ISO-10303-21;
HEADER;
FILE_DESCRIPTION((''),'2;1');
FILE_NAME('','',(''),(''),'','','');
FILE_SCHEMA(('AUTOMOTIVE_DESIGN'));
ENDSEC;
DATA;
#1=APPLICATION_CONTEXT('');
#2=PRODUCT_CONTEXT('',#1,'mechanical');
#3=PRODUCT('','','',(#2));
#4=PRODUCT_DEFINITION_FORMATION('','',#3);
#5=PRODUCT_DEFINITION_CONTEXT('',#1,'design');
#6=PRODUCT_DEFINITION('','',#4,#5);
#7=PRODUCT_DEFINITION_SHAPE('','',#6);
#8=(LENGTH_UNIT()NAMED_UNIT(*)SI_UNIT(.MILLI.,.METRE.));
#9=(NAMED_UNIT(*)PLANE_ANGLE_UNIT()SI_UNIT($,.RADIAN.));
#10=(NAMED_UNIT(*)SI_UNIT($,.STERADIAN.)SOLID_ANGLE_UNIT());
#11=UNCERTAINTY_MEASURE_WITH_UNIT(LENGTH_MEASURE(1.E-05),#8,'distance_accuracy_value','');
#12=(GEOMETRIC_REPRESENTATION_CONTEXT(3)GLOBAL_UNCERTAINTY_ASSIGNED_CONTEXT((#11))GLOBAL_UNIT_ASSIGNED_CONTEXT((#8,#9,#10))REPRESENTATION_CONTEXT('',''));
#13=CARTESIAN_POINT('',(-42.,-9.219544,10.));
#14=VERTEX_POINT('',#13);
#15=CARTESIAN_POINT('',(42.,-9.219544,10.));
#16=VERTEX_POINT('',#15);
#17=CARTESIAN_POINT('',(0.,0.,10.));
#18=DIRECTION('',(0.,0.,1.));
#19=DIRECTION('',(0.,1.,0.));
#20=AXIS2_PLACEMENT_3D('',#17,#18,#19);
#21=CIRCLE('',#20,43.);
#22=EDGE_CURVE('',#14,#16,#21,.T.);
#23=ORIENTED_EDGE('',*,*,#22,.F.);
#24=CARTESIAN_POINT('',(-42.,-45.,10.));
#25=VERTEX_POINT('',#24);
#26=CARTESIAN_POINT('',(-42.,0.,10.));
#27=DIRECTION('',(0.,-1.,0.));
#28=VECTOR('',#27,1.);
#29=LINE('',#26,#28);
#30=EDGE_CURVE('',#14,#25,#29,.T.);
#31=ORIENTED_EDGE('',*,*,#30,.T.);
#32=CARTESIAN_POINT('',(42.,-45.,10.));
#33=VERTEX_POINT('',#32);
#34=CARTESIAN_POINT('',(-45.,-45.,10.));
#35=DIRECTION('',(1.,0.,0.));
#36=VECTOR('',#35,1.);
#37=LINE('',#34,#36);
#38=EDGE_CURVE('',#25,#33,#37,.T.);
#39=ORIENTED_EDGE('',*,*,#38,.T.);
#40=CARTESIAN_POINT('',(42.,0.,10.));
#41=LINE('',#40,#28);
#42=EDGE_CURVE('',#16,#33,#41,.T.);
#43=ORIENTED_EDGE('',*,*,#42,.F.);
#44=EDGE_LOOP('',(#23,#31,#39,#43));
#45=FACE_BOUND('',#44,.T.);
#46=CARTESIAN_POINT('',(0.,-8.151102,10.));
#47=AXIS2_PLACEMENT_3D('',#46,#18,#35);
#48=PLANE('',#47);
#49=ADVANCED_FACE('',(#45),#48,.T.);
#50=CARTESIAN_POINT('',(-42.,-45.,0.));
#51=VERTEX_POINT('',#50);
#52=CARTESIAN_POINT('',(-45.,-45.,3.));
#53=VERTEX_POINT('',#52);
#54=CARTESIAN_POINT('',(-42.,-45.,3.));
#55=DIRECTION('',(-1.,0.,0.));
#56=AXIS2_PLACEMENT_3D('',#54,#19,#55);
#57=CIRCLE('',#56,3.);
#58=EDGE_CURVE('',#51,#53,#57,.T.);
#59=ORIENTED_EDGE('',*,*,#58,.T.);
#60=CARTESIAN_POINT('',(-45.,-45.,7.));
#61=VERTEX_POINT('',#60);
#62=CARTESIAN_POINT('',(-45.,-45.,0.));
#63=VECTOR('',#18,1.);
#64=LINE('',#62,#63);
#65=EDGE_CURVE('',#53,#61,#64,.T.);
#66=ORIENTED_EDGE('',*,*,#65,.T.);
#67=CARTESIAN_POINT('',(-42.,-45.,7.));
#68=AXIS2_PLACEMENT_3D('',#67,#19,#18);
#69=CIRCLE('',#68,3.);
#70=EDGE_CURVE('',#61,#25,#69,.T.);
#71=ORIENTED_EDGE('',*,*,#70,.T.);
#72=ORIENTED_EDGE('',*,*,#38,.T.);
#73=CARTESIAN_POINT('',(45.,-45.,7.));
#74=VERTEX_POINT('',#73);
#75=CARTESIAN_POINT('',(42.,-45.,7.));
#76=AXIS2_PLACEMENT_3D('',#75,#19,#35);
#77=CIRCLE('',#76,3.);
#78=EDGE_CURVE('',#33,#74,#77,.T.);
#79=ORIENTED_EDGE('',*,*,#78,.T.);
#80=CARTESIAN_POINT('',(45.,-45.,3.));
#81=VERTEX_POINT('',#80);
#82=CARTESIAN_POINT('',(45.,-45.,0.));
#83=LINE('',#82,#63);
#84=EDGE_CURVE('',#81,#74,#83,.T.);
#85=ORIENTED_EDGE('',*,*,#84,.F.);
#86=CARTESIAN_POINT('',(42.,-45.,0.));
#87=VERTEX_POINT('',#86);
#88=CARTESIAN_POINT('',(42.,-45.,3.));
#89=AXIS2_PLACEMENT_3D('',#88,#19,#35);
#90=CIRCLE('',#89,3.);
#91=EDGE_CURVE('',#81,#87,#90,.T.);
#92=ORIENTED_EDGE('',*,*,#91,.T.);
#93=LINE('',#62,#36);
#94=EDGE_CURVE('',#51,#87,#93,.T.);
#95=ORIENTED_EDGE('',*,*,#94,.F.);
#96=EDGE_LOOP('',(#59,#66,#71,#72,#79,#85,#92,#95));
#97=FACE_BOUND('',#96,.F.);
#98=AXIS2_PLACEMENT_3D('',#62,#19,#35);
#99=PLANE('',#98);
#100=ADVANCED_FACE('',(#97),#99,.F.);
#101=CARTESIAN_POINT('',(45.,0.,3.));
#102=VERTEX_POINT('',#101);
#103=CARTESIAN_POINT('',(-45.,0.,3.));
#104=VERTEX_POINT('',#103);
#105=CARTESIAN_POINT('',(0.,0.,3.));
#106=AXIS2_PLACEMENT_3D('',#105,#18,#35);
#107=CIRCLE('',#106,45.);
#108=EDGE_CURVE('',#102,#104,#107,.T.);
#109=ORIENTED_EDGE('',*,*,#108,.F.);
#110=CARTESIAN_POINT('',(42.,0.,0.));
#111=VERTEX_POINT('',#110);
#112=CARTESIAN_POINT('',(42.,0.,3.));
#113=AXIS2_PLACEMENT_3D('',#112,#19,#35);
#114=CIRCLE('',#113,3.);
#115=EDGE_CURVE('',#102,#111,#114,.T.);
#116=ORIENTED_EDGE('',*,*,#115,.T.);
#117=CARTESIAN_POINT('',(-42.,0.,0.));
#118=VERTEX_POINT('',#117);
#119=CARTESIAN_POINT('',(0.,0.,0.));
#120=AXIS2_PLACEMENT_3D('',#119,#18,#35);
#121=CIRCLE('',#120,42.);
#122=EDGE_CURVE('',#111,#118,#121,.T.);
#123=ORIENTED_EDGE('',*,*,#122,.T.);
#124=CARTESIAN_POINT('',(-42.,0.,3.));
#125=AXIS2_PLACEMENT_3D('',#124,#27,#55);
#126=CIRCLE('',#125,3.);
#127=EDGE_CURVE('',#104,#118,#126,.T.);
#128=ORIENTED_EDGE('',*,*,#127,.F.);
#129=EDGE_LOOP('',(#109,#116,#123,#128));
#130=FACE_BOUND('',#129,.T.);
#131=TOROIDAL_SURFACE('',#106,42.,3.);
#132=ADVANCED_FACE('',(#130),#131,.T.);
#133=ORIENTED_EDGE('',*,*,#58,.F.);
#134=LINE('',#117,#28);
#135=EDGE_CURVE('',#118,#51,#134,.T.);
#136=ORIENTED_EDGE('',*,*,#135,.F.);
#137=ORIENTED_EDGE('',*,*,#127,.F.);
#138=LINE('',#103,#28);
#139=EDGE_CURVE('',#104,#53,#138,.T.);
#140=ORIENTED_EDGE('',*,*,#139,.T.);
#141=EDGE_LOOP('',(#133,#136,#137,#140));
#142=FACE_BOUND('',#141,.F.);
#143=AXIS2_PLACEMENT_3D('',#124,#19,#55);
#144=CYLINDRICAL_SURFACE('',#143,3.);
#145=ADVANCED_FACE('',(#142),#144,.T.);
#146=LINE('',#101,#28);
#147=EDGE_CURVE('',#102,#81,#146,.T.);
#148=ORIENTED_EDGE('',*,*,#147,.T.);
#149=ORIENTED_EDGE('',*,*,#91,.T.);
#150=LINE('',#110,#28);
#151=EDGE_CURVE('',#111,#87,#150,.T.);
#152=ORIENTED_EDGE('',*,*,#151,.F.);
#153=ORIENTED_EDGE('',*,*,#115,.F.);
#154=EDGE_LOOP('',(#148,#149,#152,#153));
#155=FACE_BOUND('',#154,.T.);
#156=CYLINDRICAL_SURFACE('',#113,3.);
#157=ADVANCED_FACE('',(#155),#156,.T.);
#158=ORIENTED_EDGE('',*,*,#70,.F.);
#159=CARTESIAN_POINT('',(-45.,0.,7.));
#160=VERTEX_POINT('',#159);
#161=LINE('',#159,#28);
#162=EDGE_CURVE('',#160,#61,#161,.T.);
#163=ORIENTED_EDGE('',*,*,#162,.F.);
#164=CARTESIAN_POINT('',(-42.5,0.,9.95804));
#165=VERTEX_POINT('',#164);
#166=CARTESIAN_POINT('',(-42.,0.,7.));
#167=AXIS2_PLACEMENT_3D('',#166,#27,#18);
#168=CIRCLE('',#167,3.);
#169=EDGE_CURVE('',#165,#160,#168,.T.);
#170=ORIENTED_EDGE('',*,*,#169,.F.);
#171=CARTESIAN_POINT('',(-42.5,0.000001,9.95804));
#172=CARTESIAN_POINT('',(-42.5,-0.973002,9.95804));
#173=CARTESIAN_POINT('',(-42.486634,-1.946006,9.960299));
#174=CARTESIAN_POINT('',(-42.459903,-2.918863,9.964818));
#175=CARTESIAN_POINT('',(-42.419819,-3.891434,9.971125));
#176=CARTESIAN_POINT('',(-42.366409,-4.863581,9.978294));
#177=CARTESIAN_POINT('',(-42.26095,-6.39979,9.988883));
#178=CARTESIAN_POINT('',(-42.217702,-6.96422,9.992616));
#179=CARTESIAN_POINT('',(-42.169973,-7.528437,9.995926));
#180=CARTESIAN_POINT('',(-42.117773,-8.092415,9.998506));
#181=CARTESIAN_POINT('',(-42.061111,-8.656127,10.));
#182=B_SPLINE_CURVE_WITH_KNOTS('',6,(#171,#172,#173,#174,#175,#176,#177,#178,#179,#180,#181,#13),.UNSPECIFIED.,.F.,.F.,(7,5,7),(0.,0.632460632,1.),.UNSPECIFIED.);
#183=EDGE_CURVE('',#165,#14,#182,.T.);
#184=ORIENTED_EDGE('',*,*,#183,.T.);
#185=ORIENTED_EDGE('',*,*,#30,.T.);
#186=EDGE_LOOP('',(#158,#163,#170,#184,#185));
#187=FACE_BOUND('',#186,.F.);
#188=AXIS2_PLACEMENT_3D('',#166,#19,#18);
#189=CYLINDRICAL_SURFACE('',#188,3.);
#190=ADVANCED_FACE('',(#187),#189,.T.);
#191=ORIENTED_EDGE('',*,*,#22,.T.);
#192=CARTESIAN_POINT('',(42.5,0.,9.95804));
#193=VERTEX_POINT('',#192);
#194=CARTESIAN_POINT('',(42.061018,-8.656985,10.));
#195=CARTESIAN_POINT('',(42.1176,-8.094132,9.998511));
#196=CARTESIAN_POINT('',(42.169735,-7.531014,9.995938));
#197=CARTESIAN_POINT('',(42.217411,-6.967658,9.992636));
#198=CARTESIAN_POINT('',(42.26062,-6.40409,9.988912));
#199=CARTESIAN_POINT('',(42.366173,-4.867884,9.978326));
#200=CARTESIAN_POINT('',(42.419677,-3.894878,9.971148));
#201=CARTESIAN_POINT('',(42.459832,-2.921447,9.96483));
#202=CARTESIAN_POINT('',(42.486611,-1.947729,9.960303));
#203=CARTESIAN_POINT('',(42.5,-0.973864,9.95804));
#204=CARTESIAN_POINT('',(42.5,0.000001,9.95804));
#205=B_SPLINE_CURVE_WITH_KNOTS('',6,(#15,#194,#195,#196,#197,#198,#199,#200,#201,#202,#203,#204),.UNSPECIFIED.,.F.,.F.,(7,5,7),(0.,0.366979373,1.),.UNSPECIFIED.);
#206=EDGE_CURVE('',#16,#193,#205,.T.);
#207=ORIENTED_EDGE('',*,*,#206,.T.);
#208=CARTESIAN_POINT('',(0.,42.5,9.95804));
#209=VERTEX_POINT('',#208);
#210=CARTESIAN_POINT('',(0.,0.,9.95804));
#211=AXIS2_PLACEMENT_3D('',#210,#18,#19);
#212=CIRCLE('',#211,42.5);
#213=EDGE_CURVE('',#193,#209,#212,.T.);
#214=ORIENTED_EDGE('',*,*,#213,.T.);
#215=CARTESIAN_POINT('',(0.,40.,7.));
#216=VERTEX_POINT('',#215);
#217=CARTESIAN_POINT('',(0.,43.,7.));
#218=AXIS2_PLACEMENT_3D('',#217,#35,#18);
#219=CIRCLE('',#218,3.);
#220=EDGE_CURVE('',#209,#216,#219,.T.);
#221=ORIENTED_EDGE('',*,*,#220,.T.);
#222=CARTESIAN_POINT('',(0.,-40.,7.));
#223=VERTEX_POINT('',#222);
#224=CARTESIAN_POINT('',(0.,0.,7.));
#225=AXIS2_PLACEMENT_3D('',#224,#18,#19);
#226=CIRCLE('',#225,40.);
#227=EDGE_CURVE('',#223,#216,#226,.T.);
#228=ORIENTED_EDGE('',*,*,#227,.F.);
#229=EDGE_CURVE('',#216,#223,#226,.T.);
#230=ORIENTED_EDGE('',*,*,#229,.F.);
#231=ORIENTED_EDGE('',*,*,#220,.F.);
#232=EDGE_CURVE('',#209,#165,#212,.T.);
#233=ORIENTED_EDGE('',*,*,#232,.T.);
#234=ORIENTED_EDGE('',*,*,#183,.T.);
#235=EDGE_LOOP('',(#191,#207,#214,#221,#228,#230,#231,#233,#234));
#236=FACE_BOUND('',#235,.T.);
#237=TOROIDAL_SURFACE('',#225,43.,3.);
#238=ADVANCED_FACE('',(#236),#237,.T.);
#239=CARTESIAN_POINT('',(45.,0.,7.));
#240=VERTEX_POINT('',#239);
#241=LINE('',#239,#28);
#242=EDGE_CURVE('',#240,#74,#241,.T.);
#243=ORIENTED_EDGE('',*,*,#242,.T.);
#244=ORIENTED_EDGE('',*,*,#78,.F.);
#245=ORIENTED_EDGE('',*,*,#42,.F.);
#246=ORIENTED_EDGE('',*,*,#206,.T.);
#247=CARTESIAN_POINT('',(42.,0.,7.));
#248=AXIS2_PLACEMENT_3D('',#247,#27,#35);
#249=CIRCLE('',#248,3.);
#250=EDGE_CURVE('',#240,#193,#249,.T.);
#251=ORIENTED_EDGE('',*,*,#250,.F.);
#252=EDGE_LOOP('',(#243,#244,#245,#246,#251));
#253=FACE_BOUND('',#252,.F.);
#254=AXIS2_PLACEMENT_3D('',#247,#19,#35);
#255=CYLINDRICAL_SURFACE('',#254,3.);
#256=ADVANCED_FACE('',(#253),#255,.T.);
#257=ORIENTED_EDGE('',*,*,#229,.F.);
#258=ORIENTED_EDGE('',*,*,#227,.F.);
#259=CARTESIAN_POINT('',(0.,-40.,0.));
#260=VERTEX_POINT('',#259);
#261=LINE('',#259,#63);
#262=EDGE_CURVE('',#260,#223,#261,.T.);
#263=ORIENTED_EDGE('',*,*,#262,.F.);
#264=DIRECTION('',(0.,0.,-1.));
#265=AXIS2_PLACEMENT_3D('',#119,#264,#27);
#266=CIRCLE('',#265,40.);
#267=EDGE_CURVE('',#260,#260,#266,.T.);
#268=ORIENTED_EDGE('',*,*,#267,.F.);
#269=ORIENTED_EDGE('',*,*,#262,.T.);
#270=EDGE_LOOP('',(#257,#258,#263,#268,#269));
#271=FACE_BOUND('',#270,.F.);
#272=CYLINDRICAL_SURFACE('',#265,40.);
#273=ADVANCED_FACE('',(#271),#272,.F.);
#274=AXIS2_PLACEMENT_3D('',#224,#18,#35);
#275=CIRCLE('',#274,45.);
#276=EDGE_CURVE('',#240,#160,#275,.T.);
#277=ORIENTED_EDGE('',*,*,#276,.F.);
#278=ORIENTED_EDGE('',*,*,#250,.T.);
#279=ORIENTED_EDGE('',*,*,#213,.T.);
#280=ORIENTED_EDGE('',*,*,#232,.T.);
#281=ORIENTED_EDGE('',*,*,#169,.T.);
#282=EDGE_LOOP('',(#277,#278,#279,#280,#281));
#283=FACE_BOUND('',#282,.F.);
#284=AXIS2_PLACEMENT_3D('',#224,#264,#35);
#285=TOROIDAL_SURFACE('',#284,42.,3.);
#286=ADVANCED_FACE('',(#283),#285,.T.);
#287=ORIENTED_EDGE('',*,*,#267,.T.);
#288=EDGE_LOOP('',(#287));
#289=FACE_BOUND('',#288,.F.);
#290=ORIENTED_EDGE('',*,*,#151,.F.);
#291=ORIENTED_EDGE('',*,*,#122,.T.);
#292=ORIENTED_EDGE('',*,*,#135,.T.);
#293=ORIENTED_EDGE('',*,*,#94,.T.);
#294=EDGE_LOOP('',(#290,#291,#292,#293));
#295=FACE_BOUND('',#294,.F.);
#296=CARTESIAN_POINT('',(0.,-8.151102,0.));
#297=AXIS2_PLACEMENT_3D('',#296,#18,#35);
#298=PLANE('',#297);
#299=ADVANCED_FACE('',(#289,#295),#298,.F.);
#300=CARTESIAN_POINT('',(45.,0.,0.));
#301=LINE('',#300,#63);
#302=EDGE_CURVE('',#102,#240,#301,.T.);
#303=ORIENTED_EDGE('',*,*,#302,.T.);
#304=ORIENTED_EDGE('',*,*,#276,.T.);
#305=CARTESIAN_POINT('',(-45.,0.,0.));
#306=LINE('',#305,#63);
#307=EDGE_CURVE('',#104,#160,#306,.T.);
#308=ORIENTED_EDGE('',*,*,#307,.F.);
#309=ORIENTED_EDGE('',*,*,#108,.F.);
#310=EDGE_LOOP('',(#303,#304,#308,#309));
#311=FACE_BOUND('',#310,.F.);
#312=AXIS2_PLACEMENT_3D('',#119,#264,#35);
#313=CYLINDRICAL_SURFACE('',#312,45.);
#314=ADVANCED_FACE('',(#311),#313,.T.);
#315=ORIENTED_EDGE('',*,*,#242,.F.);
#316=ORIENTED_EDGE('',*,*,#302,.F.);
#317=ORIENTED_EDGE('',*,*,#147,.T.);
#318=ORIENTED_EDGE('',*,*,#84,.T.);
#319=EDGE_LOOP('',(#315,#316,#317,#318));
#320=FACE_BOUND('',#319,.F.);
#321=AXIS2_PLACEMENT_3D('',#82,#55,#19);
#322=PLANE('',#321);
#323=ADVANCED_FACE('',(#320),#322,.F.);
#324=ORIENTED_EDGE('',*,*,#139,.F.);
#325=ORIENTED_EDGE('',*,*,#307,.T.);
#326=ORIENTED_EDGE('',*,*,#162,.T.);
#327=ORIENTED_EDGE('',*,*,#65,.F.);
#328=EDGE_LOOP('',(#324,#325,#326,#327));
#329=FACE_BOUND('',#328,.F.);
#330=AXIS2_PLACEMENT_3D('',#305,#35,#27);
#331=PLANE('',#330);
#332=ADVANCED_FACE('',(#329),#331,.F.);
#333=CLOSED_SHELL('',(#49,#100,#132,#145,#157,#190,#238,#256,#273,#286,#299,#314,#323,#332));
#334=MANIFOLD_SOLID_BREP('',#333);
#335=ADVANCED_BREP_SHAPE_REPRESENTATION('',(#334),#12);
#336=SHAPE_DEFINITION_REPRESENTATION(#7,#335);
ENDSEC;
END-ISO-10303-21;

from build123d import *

# Parameters (mm, degrees)
F1_DEPTH    = 10
F2_T1_DEPTH = 52.5
F2_T6_ANGLE = 180
F2_T8_ANGLE = 180


# Not quite as in the source:
# - a fillet or chamfer that OpenCascade refuses, or shapes differently, is made with other operations: its cross-section is extruded or revolved along the edge and cut away or added


with BuildPart() as f1:
    # F0 (on Top) → F1 (new body)
    with BuildSketch(Plane.XY):
        with BuildLine():
            Line((45, -45), (45, 0))
            ThreePointArc((45, 0), (0, 45), (-45, 0))
            Line((-45, 0), (-45, -45))
            Line((-45, -45), (0, -45))
            Line((0, -45), (45, -45))
        make_face()
        with BuildLine():
            ThreePointArc((0, 40), (40, 0), (0, -40))
            ThreePointArc((0, -40), (-40, 0), (0, 40))
        make_face(mode=Mode.SUBTRACT)
    extrude(amount=F1_DEPTH)

    # F2: fillet of radius 3 on 6 edges, made by hand

    # F2_s2 → F2_t1 (cut)
    with BuildSketch(Plane.XZ):
        with BuildLine():
            ThreePointArc((-42, 10), (-44.1213203436, 9.1213203436), (-45, 7))
            Line((-45, 7), (-45, 10))
            Line((-45, 10), (-42, 10))
        make_face()
        with BuildLine():
            ThreePointArc((-45, 3), (-44.1213203436, 0.8786796564), (-42, 0))
            Line((-42, 0), (-45, 0))
            Line((-45, 0), (-45, 3))
        make_face()
        with BuildLine():
            ThreePointArc((45, 3), (44.1213203436, 0.8786796564), (42, 0))
            Line((42, 0), (45, 0))
            Line((45, 0), (45, 3))
        make_face()
        with BuildLine():
            ThreePointArc((45, 7), (44.1213203436, 9.1213203436), (42, 10))
            Line((42, 10), (45, 10))
            Line((45, 10), (45, 7))
        make_face()
    extrude(amount=F2_T1_DEPTH, mode=Mode.SUBTRACT)

    # F2_s3 → F2_t4 (revolve, cut)
    with BuildSketch(Plane.YZ):
        with BuildLine():
            ThreePointArc((43, 10), (40.8786796564, 9.1213203436), (40, 7))
            Line((40, 7), (40, 10))
            Line((40, 10), (43, 10))
        make_face()
    revolve(axis=Axis((0, 0, 10), (0, 0, 1)), mode=Mode.SUBTRACT)

    # F2_s5 → F2_t6 (revolve, cut)
    with BuildSketch(Plane.XZ):
        with BuildLine():
            ThreePointArc((42, 10), (44.1213203436, 9.1213203436), (45, 7))
            Line((45, 7), (45, 10))
            Line((45, 10), (42, 10))
        make_face()
    revolve(axis=Axis((0, 0, 10), (0, 0, 1)), revolution_arc=F2_T6_ANGLE, mode=Mode.SUBTRACT)

    # F2_s7 → F2_t8 (revolve, cut)
    with BuildSketch(Plane.XZ):
        with BuildLine():
            ThreePointArc((42, 0), (44.1213203436, 0.8786796564), (45, 3))
            Line((45, 3), (45, 0))
            Line((45, 0), (42, 0))
        make_face()
    revolve(axis=Axis((0, 0, 0), (0, 0, 1)), revolution_arc=F2_T8_ANGLE, mode=Mode.SUBTRACT)


solid = f1.part
